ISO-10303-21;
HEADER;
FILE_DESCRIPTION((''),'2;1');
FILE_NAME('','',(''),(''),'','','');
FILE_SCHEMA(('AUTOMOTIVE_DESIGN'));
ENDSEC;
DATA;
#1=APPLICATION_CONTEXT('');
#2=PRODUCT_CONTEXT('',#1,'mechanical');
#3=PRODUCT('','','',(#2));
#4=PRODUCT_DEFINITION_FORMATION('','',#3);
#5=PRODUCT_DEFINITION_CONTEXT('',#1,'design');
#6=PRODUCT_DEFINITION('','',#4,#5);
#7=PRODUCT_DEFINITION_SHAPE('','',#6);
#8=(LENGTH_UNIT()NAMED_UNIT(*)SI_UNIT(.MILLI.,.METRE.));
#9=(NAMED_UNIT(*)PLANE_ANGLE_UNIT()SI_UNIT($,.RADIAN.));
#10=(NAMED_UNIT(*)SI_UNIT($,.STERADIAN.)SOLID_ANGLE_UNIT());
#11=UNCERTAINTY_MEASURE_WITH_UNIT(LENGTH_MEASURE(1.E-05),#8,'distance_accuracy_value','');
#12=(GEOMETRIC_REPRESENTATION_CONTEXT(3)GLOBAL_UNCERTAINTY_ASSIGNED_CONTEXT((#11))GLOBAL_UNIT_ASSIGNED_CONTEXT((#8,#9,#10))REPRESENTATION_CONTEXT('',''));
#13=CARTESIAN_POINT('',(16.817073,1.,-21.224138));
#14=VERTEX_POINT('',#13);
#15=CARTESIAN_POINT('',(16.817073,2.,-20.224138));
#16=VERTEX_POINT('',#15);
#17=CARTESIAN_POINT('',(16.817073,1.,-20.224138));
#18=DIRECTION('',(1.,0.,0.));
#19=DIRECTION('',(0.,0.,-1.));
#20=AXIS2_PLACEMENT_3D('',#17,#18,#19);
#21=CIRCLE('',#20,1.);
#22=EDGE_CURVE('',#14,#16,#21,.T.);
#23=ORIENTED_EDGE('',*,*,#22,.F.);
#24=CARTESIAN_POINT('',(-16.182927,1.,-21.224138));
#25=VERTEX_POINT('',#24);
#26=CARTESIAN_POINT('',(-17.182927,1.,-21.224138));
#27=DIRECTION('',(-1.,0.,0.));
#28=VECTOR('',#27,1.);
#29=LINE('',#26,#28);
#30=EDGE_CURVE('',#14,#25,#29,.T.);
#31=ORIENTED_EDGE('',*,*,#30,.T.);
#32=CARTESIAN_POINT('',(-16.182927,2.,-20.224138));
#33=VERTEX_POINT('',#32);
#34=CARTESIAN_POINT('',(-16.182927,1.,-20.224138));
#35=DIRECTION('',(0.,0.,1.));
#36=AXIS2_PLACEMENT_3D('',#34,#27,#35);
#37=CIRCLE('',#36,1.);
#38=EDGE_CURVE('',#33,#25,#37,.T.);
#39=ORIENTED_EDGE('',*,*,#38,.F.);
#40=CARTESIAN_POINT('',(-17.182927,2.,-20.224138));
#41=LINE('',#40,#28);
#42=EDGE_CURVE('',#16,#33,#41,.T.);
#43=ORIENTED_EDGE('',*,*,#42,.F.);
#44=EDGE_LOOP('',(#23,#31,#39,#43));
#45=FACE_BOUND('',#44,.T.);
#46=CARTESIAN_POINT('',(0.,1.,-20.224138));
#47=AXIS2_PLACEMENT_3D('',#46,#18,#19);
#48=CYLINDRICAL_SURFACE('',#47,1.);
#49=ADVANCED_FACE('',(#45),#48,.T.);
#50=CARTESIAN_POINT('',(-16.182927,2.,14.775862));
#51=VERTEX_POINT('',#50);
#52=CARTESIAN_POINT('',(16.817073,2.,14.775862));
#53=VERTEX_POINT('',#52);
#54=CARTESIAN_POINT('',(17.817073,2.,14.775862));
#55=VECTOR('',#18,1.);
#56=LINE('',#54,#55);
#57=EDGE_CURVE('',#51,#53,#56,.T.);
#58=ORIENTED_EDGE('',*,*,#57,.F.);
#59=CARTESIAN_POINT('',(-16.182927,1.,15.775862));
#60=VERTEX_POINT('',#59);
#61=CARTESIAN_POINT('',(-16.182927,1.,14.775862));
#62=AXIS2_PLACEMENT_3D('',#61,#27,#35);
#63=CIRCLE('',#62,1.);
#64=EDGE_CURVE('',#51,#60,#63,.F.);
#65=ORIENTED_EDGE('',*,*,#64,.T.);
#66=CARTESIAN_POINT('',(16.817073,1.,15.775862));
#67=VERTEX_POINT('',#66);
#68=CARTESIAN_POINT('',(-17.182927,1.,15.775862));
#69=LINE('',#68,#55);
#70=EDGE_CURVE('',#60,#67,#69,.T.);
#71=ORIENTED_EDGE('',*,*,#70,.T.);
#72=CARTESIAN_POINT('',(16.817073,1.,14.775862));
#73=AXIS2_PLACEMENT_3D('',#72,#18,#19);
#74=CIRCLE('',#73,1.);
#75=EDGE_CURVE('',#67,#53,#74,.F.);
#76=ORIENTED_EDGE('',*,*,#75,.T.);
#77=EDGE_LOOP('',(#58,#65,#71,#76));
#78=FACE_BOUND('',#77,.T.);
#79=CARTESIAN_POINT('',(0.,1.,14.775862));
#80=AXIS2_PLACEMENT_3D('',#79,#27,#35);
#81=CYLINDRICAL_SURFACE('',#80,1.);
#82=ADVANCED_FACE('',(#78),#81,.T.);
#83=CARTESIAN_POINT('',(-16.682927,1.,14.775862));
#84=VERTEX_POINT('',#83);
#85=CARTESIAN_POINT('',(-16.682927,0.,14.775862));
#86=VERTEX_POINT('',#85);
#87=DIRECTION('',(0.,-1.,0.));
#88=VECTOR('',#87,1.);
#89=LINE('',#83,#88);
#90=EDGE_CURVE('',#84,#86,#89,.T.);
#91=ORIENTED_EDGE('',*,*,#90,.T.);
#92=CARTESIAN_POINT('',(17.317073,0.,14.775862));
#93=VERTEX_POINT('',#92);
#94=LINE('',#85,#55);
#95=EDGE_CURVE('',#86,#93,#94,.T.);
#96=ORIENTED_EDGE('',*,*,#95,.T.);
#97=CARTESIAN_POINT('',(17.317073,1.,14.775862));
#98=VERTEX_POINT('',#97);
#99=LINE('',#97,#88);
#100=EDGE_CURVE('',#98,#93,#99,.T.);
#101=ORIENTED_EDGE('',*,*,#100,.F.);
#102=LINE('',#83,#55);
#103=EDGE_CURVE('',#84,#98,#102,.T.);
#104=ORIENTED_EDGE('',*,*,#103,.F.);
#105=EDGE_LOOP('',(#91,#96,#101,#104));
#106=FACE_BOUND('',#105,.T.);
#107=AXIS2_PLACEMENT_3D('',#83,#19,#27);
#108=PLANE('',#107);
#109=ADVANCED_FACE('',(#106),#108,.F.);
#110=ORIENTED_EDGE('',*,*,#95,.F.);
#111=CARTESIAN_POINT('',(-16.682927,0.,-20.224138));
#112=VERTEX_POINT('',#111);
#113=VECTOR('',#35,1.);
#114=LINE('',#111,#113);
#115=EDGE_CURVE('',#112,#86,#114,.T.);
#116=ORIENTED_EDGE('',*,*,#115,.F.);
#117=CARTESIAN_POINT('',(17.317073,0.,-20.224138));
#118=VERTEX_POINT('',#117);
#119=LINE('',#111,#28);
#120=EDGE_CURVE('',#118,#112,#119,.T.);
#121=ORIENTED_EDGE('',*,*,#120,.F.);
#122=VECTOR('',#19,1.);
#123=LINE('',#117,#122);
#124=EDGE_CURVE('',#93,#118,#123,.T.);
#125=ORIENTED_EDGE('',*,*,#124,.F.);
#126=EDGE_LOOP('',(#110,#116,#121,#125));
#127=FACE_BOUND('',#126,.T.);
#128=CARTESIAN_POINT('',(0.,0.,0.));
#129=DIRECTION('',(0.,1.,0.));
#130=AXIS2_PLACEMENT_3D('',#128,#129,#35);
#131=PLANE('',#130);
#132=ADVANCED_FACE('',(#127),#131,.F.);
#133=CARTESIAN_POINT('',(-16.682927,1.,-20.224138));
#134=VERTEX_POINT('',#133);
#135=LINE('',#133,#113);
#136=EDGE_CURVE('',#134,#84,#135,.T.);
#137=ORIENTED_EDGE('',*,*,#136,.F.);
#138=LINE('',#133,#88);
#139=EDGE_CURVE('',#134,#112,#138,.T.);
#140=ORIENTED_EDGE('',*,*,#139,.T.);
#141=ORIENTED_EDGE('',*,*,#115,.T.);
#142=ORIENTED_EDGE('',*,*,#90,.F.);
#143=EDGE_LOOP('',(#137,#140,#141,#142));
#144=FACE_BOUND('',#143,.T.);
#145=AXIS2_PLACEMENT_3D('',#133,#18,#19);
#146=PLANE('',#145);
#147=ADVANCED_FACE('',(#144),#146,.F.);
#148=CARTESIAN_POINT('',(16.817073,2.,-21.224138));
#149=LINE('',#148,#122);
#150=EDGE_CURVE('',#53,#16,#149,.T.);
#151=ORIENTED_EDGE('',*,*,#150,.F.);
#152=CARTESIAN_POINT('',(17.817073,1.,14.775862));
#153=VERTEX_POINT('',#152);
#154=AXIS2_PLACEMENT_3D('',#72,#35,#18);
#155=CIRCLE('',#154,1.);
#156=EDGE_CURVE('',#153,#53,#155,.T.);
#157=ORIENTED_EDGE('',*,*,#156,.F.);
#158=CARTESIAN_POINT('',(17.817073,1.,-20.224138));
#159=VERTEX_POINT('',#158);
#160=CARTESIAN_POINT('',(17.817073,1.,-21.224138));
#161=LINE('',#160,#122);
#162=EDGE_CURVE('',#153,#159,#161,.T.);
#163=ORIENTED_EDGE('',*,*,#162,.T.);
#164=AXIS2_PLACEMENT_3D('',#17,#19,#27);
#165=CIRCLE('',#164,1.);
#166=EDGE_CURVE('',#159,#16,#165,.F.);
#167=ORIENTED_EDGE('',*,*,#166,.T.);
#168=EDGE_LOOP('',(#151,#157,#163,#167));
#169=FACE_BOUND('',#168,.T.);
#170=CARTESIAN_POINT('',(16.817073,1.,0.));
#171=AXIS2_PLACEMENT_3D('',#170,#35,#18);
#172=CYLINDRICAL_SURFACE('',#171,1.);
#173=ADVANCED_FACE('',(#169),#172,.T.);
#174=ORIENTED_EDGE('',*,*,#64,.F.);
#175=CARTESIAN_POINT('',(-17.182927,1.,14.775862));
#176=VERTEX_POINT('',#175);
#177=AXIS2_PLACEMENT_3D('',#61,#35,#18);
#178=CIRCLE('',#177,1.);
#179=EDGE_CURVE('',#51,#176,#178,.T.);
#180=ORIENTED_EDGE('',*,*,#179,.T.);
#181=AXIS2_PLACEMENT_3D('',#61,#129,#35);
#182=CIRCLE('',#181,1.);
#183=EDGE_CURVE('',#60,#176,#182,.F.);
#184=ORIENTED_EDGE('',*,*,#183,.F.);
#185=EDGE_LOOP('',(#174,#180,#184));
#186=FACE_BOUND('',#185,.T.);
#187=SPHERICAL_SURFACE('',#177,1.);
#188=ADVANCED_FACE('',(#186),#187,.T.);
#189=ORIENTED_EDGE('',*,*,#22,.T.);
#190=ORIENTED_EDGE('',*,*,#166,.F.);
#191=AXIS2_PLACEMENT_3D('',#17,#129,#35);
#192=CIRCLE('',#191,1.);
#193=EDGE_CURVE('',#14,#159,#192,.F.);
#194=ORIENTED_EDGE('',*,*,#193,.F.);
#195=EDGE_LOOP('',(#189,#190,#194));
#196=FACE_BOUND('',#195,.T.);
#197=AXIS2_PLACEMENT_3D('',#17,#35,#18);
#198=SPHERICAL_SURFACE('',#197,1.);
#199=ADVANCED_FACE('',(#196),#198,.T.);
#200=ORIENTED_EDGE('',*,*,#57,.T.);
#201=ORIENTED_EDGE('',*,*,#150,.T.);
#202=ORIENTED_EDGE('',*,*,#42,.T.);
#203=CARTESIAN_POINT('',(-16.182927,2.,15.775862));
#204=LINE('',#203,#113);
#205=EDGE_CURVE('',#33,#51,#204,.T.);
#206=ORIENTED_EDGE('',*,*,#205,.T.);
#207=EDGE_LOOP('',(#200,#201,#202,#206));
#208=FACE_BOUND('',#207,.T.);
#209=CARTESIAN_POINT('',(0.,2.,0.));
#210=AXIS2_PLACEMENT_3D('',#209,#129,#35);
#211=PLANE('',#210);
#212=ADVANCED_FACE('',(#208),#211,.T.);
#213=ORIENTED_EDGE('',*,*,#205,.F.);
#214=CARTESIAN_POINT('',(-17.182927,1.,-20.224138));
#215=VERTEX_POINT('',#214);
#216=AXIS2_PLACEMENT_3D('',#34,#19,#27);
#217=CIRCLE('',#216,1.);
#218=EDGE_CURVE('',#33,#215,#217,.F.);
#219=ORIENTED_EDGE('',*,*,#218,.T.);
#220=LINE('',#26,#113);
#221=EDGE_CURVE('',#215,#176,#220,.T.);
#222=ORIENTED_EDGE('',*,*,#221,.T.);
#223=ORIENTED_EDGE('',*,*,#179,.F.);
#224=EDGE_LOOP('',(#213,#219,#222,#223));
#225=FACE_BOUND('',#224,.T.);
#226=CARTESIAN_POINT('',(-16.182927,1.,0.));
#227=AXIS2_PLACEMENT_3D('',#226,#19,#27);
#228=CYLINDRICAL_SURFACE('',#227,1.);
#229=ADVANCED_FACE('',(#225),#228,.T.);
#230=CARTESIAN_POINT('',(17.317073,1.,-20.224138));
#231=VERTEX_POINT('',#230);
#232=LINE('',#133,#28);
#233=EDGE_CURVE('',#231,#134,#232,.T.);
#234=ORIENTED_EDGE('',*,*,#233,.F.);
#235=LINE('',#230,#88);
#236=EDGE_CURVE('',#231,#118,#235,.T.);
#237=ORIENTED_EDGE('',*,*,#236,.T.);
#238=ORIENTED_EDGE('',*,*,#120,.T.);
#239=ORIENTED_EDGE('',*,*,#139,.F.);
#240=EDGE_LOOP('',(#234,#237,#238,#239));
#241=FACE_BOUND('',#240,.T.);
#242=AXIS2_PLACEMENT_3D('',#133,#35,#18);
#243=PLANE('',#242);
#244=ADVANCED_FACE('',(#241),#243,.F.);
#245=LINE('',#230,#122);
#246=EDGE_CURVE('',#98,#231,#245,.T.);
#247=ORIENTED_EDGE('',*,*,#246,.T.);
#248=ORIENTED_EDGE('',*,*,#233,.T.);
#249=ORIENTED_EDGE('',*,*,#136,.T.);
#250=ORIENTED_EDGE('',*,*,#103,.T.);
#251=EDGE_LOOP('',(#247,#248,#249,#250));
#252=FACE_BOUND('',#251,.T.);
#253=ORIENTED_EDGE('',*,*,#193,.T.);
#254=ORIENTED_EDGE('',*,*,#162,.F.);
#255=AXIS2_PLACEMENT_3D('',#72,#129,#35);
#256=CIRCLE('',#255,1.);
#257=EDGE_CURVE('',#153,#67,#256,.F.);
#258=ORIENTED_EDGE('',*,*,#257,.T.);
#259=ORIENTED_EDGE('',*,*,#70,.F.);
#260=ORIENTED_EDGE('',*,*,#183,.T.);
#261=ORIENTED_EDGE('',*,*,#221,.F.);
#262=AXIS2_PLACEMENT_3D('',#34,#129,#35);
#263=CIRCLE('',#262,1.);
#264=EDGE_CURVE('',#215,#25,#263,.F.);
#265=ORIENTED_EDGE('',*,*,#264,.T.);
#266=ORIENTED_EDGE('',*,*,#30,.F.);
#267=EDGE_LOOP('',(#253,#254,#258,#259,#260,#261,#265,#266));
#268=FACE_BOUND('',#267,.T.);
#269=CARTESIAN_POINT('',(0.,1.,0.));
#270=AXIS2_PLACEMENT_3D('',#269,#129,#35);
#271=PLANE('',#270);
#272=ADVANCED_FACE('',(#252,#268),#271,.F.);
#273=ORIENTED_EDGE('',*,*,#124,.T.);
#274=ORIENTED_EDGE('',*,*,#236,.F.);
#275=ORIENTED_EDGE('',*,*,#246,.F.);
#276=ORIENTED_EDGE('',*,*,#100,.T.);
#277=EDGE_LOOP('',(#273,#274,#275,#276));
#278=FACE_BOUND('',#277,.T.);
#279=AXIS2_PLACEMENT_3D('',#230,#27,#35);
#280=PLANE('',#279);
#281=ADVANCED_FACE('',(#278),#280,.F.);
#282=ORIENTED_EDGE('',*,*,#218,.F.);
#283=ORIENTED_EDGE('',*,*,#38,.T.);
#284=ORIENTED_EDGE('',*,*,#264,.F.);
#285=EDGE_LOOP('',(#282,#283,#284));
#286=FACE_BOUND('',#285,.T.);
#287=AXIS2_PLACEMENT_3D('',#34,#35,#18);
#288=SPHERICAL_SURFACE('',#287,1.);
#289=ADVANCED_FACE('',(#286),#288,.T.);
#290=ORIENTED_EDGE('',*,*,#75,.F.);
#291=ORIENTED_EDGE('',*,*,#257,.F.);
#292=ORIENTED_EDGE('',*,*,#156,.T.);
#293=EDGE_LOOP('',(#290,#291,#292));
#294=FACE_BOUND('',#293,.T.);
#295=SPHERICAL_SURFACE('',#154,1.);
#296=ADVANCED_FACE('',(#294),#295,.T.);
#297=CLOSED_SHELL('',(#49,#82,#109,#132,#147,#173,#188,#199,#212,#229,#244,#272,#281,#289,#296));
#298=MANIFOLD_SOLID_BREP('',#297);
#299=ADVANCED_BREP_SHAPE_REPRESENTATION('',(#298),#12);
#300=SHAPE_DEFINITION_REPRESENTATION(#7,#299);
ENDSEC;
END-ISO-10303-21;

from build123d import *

# Parameters (mm, degrees)
SKETCH_1_W      = 34
SKETCH_1_H      = 35
EXTRUDE_2_DEPTH = 1
SKETCH_3_W      = 35
SKETCH_3_H      = 37
EXTRUDE_3_DEPTH = 1
FILLET_1_R      = 1


with BuildPart() as part:
    # ｽｹｯﾁ1 → ﾎﾞｽ - 押し出し2 (new body)
    with BuildSketch(Plane(origin=(0, 0, 0), x_dir=(1, 0, 0), z_dir=(0, 1, 0))):
        with Locations((0.317073171, 2.724137931)):
            Rectangle(SKETCH_1_W, SKETCH_1_H)
    extrude(amount=EXTRUDE_2_DEPTH)

    # ｽｹｯﾁ3 → ﾎﾞｽ - 押し出し3 (add)
    with BuildSketch(Plane(origin=(0, 1, 0), x_dir=(1, 0, 0), z_dir=(0, 1, 0))):
        with Locations((0.317073171, 2.724137931)):
            Rectangle(SKETCH_3_W, SKETCH_3_H)
    extrude(amount=EXTRUDE_3_DEPTH)

    # ﾌｨﾚｯﾄ1
    fillet_1_edges = [part.edges().sort_by_distance(p)[0] for p in [
        (-17.182926829, 1.5, -21.224137931),
        (-17.182926829, 1.5, 15.775862069),
        (17.817073171, 1.5, 15.775862069),
        (17.817073171, 1.5, -21.224137931),
        (-17.182926829, 2, -2.724137931),
        (0.317073171, 2, 15.775862069),
        (17.817073171, 2, -2.724137931),
        (0.317073171, 2, -21.224137931),
    ]]
    fillet(fillet_1_edges, radius=FILLET_1_R - 0.0001)  # a hair under: the kernel refuses the full size


solid = part.part
